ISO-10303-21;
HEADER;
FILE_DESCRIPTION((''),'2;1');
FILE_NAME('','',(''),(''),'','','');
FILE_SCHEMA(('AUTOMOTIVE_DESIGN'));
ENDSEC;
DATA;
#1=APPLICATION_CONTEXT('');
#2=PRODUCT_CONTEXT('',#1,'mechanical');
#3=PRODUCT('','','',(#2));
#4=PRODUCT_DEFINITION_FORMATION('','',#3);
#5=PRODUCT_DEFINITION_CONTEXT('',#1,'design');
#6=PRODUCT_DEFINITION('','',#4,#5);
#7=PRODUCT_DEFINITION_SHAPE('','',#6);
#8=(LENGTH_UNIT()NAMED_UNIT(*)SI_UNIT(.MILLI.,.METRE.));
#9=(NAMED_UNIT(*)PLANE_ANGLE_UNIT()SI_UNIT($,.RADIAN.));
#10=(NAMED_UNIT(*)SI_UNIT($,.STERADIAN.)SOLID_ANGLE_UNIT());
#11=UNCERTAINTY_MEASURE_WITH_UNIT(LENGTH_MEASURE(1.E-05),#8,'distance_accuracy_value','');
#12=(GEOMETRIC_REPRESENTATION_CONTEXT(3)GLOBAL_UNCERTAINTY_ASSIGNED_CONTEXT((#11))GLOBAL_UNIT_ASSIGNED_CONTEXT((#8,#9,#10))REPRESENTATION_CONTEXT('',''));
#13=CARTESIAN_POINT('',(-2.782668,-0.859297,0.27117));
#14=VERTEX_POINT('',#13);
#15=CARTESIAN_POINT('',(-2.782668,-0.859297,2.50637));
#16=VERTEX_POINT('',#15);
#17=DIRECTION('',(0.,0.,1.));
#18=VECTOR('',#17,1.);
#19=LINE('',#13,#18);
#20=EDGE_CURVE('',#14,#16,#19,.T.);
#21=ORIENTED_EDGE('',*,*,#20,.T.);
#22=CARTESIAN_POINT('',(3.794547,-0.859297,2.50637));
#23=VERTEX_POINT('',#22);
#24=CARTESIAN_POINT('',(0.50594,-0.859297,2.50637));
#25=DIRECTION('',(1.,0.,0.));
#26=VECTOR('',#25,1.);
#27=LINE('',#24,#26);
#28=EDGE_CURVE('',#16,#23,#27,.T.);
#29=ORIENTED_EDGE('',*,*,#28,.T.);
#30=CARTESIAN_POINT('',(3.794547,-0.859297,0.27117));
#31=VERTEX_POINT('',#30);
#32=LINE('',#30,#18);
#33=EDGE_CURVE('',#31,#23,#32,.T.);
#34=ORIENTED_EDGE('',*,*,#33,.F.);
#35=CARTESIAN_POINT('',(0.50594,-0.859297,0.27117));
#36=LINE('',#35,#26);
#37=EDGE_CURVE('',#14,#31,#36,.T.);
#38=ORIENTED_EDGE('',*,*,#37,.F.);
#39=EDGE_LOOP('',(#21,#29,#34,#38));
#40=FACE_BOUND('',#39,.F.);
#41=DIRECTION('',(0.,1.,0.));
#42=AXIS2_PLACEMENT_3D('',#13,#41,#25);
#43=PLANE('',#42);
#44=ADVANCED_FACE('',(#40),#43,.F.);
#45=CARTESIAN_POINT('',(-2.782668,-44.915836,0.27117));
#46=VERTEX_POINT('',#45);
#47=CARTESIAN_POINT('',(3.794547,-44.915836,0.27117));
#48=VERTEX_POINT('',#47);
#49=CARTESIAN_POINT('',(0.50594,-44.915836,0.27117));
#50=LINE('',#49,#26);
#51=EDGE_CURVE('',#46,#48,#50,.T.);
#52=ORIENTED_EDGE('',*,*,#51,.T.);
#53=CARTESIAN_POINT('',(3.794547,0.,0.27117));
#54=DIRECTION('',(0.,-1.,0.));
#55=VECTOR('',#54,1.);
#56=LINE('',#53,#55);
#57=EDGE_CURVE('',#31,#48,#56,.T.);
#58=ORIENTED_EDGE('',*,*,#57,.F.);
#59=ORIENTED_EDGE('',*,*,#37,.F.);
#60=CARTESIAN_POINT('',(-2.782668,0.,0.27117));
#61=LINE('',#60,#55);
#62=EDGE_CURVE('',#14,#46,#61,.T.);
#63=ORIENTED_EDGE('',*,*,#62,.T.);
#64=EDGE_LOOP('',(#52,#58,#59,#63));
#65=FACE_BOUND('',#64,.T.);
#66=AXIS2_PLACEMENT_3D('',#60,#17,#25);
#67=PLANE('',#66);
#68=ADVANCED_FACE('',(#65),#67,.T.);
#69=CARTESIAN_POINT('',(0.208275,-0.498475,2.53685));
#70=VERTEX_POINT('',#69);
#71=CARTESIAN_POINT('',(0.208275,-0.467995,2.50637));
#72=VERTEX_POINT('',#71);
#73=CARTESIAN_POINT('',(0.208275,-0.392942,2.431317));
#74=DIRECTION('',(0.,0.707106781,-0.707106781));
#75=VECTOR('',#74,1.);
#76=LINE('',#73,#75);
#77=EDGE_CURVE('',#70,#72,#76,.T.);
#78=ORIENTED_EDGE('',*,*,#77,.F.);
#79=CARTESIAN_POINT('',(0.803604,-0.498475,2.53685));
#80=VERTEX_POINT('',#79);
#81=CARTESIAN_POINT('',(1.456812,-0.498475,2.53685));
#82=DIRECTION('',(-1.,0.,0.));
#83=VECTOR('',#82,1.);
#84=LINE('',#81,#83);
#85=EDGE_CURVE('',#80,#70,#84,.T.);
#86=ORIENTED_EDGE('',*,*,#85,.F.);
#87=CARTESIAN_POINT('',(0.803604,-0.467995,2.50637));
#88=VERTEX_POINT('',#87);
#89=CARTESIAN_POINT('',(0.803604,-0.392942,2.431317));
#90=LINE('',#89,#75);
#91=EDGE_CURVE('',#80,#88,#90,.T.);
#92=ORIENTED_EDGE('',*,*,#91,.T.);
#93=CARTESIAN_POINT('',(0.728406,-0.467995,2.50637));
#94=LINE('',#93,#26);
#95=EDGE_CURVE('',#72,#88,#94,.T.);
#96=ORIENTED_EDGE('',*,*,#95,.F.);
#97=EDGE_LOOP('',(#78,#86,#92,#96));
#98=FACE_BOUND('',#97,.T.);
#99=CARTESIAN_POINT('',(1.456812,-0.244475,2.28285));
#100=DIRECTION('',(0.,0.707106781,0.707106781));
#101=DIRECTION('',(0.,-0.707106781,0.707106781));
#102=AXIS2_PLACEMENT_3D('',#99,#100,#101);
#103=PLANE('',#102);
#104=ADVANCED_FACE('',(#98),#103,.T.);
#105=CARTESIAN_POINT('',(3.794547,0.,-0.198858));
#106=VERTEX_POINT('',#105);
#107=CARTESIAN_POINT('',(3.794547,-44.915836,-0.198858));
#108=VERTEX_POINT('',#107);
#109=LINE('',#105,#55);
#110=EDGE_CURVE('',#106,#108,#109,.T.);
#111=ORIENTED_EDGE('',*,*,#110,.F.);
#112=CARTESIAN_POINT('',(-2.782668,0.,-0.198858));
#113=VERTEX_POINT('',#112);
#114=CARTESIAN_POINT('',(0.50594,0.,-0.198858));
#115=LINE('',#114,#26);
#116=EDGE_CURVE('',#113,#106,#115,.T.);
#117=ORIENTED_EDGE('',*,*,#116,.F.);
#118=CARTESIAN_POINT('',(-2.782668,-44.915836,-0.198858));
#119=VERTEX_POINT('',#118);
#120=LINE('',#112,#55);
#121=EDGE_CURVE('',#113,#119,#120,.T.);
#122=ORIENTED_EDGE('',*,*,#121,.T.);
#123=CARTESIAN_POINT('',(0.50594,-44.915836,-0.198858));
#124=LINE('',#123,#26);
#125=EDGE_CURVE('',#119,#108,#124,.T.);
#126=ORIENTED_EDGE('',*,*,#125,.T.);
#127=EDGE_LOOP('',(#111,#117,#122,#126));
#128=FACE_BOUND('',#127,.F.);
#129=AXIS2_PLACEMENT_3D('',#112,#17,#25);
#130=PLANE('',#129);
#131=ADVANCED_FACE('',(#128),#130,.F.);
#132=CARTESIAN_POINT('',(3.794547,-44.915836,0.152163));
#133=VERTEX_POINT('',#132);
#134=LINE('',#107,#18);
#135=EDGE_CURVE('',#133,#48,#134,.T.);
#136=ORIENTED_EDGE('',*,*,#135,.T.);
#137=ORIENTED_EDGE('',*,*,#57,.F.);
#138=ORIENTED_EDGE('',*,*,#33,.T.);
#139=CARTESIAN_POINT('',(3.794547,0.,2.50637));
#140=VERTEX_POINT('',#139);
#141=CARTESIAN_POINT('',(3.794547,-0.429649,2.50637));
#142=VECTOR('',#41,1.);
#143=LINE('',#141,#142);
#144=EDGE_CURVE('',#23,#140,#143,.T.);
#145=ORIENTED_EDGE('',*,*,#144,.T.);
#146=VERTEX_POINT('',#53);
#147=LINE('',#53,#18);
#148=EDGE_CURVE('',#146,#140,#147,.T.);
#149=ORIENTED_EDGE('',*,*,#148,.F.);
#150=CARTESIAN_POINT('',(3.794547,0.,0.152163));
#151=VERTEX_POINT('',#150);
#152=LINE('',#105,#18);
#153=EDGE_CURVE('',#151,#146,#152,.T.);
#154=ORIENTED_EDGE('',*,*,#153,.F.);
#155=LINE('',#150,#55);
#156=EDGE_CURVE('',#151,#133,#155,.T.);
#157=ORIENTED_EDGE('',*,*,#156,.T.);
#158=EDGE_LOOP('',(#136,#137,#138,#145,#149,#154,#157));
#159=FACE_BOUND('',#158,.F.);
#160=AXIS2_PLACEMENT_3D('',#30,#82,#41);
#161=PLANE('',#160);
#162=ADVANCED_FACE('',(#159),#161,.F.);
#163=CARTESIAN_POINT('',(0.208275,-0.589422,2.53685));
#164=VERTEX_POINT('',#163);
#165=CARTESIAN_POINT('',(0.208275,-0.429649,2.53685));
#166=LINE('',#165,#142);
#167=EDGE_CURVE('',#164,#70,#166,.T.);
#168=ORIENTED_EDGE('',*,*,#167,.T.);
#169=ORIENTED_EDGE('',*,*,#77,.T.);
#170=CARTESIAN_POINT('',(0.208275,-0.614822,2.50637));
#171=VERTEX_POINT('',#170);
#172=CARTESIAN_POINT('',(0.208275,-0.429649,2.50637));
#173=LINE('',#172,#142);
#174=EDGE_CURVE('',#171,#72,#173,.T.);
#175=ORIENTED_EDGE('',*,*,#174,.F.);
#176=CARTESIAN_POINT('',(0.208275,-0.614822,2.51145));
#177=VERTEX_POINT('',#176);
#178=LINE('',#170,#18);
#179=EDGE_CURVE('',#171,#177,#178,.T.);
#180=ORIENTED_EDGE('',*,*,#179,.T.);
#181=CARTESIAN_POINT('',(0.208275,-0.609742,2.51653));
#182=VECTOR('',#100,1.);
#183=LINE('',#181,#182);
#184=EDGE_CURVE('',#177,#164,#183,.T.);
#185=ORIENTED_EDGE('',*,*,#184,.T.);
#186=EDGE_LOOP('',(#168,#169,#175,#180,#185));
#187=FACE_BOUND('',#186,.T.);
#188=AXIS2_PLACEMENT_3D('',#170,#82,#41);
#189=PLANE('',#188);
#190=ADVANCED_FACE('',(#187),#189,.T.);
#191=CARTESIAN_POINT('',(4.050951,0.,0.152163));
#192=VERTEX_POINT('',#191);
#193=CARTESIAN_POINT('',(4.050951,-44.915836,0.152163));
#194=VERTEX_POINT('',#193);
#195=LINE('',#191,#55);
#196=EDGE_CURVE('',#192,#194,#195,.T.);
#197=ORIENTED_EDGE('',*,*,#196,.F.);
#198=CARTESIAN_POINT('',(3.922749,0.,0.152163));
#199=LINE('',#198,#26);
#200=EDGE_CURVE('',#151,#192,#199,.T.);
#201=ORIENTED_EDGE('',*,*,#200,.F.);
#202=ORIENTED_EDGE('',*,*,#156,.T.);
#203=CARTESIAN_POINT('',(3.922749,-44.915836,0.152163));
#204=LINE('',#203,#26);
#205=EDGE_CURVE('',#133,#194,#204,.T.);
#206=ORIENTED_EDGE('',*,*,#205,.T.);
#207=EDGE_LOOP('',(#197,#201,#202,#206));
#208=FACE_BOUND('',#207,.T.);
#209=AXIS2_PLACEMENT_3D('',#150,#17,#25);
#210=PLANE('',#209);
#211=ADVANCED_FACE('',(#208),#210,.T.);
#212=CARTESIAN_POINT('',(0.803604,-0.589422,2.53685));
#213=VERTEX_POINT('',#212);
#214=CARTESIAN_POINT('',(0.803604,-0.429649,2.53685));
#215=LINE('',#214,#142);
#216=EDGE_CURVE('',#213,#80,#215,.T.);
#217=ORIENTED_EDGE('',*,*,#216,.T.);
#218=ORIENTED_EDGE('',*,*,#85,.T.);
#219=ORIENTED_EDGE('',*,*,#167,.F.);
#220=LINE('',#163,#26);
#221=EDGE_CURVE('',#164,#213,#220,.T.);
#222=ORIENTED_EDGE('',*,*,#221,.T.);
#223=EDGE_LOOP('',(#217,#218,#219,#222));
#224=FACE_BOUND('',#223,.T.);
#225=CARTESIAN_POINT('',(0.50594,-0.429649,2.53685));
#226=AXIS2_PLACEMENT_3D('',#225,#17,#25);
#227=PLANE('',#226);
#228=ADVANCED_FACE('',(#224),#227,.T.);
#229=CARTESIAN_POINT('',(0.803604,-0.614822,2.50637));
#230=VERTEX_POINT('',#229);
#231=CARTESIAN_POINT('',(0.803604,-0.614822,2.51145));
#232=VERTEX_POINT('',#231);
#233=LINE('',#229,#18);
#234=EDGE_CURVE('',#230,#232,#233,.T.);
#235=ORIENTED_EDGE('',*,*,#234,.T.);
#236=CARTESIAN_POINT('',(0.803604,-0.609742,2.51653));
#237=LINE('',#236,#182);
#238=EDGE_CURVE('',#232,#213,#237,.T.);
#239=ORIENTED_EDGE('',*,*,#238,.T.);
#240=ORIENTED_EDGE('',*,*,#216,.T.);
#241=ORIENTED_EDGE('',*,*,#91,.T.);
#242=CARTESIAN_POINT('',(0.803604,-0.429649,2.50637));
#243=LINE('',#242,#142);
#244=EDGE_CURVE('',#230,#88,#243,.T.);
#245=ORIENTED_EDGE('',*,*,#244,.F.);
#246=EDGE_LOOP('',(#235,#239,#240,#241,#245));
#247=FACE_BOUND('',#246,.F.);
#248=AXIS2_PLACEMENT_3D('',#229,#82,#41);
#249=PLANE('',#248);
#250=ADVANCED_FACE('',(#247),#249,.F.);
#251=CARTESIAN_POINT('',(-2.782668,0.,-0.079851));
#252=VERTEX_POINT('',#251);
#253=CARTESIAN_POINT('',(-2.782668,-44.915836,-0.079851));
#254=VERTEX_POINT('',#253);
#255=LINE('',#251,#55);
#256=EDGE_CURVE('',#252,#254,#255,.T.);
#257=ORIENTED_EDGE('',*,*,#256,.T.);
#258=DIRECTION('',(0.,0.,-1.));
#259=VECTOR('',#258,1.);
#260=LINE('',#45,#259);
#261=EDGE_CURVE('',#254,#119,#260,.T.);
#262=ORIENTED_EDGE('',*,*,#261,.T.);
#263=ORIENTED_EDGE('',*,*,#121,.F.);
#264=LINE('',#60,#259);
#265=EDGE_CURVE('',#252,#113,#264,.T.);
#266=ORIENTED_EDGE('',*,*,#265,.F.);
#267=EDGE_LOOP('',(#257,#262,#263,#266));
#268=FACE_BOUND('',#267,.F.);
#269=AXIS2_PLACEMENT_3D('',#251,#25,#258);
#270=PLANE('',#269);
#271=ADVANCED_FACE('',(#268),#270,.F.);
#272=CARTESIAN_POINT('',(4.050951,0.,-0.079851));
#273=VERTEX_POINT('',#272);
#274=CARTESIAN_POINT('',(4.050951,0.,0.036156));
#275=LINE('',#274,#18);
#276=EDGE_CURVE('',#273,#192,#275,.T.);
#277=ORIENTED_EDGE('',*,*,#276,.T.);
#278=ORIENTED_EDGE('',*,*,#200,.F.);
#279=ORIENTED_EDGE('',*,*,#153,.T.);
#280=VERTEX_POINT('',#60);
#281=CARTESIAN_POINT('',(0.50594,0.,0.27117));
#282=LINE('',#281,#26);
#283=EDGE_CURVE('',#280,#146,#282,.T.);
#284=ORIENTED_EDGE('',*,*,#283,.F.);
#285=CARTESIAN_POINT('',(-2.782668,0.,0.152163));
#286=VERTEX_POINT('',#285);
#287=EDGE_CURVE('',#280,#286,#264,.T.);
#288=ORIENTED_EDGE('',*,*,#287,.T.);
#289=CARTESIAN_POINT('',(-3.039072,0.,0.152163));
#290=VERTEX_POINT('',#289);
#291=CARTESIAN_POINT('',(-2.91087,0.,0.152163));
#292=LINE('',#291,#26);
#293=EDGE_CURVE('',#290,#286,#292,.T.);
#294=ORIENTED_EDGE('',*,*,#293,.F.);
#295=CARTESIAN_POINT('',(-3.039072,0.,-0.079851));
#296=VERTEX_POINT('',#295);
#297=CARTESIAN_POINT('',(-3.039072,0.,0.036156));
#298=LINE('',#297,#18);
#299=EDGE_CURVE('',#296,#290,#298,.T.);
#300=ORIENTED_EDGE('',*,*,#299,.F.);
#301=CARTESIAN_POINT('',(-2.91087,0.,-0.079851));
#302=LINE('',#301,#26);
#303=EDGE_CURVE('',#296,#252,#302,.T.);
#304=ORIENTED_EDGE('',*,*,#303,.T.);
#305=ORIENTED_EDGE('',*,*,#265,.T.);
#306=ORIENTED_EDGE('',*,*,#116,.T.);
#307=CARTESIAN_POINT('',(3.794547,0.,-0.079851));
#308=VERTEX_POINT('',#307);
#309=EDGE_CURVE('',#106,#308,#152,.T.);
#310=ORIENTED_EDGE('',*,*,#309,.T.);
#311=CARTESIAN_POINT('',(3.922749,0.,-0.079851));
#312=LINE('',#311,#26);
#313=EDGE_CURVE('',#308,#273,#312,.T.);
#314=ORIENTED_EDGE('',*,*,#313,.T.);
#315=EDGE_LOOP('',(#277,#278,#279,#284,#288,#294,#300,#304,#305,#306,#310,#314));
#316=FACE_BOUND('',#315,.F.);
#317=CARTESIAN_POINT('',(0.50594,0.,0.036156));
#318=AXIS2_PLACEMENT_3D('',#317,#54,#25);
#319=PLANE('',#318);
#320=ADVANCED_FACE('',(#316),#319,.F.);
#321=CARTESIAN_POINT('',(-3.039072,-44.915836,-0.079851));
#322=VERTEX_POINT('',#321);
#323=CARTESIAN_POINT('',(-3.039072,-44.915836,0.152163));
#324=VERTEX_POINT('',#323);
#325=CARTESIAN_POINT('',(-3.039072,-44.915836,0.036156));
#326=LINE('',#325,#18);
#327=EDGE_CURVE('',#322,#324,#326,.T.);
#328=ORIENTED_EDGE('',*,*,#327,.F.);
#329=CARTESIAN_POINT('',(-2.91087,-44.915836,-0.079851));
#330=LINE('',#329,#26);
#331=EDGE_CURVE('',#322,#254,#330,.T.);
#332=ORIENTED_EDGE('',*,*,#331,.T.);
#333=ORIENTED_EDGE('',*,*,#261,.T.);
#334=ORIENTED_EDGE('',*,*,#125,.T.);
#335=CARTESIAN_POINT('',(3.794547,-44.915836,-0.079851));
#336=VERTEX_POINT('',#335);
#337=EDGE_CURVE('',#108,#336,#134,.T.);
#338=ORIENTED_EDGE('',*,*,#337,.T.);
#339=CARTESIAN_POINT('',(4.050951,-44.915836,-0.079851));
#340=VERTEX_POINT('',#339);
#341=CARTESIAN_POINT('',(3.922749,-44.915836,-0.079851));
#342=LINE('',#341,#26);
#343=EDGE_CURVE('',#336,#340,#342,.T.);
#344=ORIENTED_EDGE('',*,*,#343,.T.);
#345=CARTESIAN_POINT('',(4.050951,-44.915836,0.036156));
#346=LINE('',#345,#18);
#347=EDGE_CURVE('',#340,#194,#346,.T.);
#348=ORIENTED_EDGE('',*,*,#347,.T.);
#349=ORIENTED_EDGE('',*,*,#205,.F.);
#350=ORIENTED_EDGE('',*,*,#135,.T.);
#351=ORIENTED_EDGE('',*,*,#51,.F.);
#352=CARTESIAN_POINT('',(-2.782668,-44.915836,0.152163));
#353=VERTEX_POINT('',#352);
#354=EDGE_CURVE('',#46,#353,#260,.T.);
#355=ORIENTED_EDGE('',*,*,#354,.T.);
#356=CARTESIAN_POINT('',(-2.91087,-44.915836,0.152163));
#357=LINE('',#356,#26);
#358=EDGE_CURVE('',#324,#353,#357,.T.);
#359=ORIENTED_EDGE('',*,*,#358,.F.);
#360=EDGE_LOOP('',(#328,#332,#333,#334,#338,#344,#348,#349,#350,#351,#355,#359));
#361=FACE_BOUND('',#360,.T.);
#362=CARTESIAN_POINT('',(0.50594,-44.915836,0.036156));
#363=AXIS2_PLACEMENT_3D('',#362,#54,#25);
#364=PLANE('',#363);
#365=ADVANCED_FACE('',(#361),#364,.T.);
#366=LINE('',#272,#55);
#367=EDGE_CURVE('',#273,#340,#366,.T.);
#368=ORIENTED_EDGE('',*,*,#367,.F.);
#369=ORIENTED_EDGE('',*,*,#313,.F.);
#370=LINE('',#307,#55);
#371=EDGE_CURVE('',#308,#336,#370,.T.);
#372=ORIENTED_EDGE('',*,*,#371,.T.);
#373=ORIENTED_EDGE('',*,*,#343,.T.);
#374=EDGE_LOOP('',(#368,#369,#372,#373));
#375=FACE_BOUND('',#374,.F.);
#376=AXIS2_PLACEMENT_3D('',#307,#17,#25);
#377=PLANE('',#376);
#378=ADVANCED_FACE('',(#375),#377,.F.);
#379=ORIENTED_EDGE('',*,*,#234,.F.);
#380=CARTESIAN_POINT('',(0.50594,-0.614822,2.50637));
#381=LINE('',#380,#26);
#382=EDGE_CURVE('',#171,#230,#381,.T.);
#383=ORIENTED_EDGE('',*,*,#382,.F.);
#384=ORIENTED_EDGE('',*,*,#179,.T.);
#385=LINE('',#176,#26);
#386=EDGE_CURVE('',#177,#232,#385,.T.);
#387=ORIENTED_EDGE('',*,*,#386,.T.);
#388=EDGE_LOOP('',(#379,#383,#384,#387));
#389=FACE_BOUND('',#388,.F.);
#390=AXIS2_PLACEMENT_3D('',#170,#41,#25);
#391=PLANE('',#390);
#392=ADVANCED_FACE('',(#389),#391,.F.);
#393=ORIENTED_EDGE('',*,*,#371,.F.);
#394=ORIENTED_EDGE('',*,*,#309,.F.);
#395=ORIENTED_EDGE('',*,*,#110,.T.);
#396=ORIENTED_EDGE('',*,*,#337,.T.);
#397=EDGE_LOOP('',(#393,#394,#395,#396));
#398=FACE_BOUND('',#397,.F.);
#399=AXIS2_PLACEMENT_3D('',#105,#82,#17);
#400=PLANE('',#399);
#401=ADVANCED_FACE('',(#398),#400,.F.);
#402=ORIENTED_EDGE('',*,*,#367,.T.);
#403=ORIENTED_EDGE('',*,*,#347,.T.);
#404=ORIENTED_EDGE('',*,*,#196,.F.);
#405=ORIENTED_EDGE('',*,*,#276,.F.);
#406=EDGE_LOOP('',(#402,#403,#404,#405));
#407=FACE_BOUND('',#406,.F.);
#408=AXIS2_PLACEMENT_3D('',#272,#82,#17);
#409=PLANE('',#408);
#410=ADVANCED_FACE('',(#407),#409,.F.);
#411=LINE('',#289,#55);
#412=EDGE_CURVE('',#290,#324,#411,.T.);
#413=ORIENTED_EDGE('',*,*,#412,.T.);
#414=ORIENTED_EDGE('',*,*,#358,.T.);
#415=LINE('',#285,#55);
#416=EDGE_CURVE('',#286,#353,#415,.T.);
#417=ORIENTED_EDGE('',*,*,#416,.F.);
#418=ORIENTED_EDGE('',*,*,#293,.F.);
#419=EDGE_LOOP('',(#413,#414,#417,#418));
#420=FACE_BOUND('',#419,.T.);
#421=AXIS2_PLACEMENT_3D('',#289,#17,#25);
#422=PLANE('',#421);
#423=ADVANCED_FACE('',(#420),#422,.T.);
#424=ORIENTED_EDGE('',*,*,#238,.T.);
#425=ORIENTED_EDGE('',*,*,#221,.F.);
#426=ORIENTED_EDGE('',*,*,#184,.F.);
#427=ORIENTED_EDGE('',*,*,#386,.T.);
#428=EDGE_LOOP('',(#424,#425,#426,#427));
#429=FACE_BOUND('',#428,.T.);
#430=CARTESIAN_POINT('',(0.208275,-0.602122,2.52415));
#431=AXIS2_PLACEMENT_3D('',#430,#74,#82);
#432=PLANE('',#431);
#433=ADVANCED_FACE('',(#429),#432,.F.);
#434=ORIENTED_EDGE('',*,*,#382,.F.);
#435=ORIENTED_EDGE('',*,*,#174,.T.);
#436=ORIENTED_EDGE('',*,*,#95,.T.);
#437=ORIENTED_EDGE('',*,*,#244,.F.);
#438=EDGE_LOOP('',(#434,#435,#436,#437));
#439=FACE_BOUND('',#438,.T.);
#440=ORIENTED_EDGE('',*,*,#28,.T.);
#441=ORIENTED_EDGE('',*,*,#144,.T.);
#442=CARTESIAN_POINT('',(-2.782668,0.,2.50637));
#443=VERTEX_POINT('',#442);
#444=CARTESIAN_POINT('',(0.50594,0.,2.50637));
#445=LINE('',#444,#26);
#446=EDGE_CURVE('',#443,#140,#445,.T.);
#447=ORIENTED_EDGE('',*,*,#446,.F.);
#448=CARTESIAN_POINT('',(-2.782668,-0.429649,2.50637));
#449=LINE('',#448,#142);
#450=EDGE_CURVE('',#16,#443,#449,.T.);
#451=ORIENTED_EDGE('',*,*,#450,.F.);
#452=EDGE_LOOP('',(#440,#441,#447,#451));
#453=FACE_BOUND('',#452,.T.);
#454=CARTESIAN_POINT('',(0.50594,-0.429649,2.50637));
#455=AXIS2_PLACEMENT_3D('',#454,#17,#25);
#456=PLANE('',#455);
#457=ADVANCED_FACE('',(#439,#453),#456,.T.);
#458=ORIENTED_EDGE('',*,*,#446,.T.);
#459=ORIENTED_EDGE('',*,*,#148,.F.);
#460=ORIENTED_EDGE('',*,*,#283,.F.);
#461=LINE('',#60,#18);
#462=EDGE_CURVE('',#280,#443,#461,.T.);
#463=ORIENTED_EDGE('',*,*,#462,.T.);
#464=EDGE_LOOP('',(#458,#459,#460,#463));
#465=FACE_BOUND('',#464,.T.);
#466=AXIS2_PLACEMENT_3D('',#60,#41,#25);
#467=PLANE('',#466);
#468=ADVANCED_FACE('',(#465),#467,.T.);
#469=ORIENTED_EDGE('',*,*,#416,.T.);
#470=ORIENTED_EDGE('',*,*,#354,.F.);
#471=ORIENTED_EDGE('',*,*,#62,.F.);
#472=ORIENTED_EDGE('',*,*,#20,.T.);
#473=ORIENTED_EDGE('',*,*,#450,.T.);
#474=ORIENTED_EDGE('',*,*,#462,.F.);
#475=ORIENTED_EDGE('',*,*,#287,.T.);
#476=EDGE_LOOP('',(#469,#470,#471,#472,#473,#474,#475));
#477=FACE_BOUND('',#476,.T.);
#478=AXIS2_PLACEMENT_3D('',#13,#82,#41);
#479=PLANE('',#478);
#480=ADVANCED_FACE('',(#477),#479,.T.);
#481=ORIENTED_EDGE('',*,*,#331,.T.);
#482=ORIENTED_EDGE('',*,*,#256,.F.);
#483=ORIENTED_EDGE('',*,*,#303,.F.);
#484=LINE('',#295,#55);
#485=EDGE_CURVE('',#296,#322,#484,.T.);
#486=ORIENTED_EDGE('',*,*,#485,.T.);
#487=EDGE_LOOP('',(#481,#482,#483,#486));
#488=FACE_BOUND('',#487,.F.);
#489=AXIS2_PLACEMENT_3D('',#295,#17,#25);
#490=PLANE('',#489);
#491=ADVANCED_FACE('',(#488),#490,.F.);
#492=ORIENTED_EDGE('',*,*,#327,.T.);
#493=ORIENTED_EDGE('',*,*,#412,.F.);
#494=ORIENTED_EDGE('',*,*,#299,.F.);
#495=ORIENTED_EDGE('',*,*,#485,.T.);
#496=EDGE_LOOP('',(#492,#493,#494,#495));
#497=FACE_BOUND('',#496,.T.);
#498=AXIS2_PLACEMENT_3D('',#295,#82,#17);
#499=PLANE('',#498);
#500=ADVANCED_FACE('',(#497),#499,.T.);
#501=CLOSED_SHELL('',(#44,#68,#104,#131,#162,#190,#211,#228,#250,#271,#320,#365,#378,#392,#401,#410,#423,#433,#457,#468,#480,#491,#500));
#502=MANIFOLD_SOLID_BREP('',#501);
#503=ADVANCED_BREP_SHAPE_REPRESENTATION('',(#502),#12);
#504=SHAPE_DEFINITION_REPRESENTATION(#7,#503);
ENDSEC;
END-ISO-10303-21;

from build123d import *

# Parameters (mm, degrees)
F3_W        = 6.5772142261
F3_H        = 0.2320141066
F3_H_2      = 0.1190071926
F3_W_2      = 0.2564042807
F4_DEPTH    = 44.915836
F0_W        = 6.5772142261
F0_H        = 0.8592968807
F1_DEPTH    = 2.2352
F5_W        = 0.5953289354
F5_H        = 0.37034665
F6_DEPTH    = 0.03048
F7_T4_DEPTH = 1.9017438932
F2_SIZE     = 0.0254


# Not quite as in the source:
# - a fillet or chamfer that OpenCascade refuses, or shapes differently, is made with other operations: its cross-section is extruded or revolved along the edge and cut away or added


with BuildPart() as f4:
    # F3 (on Front) → F4 (new body)
    with BuildSketch(Plane.XZ):
        with Locations((0.5059395559, 0.0361560378)):
            Rectangle(F3_W, F3_H)
        with Locations((0.5059395559, 0.2116666874)):
            Rectangle(F3_W, F3_H_2)
        with Locations((0.5059395559, -0.1393546117)):
            Rectangle(F3_W, F3_H_2)
        with Locations((-2.9108696975, 0.0361560378)):
            Rectangle(F3_W_2, F3_H)
        with Locations((3.9227488093, 0.0361560378)):
            Rectangle(F3_W_2, F3_H)
    extrude(amount=F4_DEPTH)

    # F0 (on face) → F1 (join)
    with BuildSketch(Plane.XY.offset(0.2711702837)):
        with Locations((0.5059395559, -0.4296487314)):
            Rectangle(F0_W, F0_H)
    extrude(amount=F1_DEPTH)

    # F5 (on face) → F6 (join)
    with BuildSketch(Plane.XY.offset(2.5063702837)):
        with Locations((0.5059395559, -0.4296485859)):
            Rectangle(F5_W, F5_H)
    extrude(amount=F6_DEPTH)

    # F7: chamfer of 0.254 on 1 edges, made by hand


with BuildPart() as f7_tool2:
    # F7_s3 → F7_t4 (new body)
    with BuildSketch(Plane.YZ.offset(1.4568115025)):
        Polygon((-0.2444752608, 2.2828502837), (-0.4984752608, 2.5368502837), (-0.2444752608, 2.5368502837), align=None)
    extrude(amount=-F7_T4_DEPTH)

    split(bisect_by=Plane.XY.offset(2.5063702837), keep=Keep.TOP)


with BuildPart() as f4_1:
    add(f4.part)

    # F7_t1: cut F7_tool2
    add(f7_tool2.part, mode=Mode.SUBTRACT)

    # F2
    f2_edges = [f4_1.edges().sort_by_distance(p)[0] for p in [
        (0.50594, -0.614822, 2.53685),
    ]]
    chamfer(f2_edges, length=F2_SIZE)


solid = f4_1.part
